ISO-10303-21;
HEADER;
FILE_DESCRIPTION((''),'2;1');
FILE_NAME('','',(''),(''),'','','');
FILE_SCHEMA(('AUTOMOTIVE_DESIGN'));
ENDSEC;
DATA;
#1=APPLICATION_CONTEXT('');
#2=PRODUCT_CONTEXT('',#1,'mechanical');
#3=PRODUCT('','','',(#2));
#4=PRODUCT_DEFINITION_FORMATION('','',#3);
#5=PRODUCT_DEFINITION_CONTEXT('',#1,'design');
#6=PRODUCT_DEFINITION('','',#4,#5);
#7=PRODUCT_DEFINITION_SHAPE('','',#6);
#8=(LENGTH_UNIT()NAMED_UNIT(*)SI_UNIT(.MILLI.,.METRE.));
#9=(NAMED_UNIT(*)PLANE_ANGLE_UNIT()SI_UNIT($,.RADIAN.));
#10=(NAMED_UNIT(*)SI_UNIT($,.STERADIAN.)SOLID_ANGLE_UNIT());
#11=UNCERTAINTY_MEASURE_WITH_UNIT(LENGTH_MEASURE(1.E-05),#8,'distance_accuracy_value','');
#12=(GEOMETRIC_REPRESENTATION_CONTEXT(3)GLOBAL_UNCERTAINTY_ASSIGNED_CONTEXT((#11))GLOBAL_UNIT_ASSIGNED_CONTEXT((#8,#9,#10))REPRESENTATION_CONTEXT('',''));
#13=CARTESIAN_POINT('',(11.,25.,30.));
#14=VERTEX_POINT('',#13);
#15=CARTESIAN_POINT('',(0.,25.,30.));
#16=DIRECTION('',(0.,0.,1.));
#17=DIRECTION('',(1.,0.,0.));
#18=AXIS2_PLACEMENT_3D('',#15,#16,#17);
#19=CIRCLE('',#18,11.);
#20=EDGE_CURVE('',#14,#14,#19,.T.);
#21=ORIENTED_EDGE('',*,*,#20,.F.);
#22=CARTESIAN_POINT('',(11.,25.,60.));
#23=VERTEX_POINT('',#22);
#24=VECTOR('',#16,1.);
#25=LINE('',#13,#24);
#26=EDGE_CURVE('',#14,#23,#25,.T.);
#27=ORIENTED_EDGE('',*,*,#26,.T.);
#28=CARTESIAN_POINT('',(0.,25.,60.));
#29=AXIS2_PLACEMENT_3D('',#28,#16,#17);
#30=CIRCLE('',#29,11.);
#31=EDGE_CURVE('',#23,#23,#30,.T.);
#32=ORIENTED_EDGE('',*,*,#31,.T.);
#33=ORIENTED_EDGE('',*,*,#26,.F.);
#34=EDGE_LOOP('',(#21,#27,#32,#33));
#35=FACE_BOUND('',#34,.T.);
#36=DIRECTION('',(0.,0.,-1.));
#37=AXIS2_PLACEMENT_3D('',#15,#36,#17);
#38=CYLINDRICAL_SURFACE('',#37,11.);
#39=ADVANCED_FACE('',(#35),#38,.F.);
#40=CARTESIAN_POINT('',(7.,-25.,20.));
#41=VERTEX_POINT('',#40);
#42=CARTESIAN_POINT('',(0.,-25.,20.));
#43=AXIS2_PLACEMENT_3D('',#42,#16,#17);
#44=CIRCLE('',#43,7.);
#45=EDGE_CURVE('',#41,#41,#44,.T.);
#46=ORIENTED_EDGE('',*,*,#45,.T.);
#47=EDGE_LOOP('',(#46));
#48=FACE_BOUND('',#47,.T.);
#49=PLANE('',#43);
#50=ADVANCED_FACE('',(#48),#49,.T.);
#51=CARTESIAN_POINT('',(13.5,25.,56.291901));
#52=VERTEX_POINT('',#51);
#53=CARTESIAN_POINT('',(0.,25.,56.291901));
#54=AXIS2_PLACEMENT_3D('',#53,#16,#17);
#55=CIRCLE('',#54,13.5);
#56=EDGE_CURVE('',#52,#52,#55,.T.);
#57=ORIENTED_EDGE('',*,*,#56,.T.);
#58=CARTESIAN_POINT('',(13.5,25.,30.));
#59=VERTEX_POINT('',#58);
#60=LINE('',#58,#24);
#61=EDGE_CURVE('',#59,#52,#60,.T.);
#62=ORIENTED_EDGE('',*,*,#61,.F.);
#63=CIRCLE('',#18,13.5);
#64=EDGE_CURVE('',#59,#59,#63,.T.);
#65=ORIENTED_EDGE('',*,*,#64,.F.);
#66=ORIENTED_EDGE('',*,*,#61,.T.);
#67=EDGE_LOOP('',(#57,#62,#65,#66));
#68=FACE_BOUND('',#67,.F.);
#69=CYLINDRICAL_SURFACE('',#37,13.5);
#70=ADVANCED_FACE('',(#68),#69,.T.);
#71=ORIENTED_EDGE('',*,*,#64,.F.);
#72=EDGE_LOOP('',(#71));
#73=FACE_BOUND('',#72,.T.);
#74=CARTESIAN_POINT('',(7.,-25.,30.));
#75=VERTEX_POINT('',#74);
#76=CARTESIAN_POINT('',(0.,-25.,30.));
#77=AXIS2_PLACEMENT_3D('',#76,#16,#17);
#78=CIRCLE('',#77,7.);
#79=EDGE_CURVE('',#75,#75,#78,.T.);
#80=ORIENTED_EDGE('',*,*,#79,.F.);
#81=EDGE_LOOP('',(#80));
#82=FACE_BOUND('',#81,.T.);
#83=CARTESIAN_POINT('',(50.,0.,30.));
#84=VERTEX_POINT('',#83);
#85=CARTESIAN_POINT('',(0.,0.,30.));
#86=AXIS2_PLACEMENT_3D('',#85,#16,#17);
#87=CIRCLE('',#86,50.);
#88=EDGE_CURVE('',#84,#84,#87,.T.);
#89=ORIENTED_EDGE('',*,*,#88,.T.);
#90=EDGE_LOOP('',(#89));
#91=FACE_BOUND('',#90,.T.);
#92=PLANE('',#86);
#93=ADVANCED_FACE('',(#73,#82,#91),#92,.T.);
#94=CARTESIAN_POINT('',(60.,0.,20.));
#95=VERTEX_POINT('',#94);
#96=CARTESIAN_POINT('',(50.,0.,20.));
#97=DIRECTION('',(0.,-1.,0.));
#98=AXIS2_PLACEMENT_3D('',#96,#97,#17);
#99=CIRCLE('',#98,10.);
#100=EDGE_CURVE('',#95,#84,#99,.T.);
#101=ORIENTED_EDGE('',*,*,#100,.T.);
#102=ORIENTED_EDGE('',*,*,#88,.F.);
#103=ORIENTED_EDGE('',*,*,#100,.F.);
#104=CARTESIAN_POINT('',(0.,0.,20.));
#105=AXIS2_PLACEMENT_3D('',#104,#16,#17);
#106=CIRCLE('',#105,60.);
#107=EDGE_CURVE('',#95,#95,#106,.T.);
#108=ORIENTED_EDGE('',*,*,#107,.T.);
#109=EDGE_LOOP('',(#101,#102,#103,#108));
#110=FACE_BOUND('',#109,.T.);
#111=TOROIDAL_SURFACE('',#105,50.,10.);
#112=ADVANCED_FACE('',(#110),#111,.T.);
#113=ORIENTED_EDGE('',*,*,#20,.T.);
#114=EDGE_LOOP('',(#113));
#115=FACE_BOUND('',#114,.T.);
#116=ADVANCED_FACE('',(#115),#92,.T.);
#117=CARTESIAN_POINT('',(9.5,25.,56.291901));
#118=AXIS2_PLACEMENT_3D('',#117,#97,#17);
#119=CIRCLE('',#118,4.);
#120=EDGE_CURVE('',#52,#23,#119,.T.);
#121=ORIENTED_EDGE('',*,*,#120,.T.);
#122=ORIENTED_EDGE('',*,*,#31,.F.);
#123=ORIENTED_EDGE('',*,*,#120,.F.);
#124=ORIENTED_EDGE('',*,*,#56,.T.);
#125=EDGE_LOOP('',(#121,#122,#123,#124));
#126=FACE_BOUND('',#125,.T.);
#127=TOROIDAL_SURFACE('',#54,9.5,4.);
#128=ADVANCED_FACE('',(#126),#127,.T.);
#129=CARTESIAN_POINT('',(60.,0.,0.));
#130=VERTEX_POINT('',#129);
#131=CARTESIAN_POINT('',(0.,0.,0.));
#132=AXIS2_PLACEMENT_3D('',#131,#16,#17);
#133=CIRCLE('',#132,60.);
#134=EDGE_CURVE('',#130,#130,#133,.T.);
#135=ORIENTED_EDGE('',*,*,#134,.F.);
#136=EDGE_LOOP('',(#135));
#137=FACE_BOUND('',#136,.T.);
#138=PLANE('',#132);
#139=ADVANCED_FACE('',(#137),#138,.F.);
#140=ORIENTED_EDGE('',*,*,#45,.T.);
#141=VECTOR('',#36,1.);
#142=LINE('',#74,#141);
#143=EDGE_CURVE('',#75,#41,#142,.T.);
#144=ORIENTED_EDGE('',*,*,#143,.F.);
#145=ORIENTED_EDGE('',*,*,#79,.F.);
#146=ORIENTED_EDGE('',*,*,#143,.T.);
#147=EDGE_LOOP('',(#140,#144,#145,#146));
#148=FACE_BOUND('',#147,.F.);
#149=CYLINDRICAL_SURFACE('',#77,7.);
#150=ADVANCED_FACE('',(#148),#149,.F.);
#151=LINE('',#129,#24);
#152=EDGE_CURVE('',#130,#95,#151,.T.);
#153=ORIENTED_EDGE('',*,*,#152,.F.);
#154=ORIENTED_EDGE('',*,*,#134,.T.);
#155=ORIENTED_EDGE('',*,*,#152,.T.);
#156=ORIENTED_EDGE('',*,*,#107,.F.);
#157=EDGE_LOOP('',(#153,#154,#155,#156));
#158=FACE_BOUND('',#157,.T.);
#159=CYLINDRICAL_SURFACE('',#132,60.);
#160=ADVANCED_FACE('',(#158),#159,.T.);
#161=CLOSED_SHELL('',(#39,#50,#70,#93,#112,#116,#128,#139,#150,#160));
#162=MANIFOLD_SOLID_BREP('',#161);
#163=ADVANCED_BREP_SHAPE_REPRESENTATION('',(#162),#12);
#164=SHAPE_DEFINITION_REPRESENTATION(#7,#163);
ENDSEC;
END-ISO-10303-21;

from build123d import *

# Parameters (mm, degrees)
F2_R     = 13.5
F2_R_2   = 11
F3_DEPTH = 30
F5_R     = 7
F6_DEPTH = 10


# Not quite as in the source:
# - a fillet or chamfer that OpenCascade refuses, or shapes differently, is made with other operations: its cross-section is extruded or revolved along the edge and cut away or added


with BuildPart() as f1:
    # F0 (on Front) → F1 (revolve)
    with BuildSketch(Plane.XZ):
        with BuildLine():
            Line((0, 30), (0, 0))
            Line((0, 0), (60, 0))
            Line((60, 0), (60, 20))
            ThreePointArc((60, 20), (57.0710678119, 27.0710678119), (50, 30))
            Line((50, 30), (0, 30))
        make_face()
    revolve(axis=Axis((0, 0, 15), (0, 0, 1)))

    # F2 (on face) → F3 (join)
    with BuildSketch(Plane.XY.offset(30)):
        with Locations((0, 25)):
            Circle(F2_R)
        with Locations((0, 25)):
            Circle(F2_R_2, mode=Mode.SUBTRACT)
    extrude(amount=F3_DEPTH)

    # F4: fillet of radius 4 on 1 edges, made by hand

    # F4_s1 → F4_t2 (revolve, cut)
    with BuildSketch(Plane.XZ.offset(-25)):
        with BuildLine():
            ThreePointArc((13.5, 56.2919007565), (12.8166247904, 58.527968734), (11, 60))
            Line((11, 60), (13.5, 60))
            Line((13.5, 60), (13.5, 56.2919007565))
        make_face()
    revolve(axis=Axis((0, 25, 60), (0, 0, 1)), mode=Mode.SUBTRACT)

    # F5 (on face) → F6 (cut)
    with BuildSketch(Plane.XY.offset(30)):
        with Locations((0, -25)):
            Circle(F5_R)
    extrude(amount=-F6_DEPTH, mode=Mode.SUBTRACT)


solid = f1.part
